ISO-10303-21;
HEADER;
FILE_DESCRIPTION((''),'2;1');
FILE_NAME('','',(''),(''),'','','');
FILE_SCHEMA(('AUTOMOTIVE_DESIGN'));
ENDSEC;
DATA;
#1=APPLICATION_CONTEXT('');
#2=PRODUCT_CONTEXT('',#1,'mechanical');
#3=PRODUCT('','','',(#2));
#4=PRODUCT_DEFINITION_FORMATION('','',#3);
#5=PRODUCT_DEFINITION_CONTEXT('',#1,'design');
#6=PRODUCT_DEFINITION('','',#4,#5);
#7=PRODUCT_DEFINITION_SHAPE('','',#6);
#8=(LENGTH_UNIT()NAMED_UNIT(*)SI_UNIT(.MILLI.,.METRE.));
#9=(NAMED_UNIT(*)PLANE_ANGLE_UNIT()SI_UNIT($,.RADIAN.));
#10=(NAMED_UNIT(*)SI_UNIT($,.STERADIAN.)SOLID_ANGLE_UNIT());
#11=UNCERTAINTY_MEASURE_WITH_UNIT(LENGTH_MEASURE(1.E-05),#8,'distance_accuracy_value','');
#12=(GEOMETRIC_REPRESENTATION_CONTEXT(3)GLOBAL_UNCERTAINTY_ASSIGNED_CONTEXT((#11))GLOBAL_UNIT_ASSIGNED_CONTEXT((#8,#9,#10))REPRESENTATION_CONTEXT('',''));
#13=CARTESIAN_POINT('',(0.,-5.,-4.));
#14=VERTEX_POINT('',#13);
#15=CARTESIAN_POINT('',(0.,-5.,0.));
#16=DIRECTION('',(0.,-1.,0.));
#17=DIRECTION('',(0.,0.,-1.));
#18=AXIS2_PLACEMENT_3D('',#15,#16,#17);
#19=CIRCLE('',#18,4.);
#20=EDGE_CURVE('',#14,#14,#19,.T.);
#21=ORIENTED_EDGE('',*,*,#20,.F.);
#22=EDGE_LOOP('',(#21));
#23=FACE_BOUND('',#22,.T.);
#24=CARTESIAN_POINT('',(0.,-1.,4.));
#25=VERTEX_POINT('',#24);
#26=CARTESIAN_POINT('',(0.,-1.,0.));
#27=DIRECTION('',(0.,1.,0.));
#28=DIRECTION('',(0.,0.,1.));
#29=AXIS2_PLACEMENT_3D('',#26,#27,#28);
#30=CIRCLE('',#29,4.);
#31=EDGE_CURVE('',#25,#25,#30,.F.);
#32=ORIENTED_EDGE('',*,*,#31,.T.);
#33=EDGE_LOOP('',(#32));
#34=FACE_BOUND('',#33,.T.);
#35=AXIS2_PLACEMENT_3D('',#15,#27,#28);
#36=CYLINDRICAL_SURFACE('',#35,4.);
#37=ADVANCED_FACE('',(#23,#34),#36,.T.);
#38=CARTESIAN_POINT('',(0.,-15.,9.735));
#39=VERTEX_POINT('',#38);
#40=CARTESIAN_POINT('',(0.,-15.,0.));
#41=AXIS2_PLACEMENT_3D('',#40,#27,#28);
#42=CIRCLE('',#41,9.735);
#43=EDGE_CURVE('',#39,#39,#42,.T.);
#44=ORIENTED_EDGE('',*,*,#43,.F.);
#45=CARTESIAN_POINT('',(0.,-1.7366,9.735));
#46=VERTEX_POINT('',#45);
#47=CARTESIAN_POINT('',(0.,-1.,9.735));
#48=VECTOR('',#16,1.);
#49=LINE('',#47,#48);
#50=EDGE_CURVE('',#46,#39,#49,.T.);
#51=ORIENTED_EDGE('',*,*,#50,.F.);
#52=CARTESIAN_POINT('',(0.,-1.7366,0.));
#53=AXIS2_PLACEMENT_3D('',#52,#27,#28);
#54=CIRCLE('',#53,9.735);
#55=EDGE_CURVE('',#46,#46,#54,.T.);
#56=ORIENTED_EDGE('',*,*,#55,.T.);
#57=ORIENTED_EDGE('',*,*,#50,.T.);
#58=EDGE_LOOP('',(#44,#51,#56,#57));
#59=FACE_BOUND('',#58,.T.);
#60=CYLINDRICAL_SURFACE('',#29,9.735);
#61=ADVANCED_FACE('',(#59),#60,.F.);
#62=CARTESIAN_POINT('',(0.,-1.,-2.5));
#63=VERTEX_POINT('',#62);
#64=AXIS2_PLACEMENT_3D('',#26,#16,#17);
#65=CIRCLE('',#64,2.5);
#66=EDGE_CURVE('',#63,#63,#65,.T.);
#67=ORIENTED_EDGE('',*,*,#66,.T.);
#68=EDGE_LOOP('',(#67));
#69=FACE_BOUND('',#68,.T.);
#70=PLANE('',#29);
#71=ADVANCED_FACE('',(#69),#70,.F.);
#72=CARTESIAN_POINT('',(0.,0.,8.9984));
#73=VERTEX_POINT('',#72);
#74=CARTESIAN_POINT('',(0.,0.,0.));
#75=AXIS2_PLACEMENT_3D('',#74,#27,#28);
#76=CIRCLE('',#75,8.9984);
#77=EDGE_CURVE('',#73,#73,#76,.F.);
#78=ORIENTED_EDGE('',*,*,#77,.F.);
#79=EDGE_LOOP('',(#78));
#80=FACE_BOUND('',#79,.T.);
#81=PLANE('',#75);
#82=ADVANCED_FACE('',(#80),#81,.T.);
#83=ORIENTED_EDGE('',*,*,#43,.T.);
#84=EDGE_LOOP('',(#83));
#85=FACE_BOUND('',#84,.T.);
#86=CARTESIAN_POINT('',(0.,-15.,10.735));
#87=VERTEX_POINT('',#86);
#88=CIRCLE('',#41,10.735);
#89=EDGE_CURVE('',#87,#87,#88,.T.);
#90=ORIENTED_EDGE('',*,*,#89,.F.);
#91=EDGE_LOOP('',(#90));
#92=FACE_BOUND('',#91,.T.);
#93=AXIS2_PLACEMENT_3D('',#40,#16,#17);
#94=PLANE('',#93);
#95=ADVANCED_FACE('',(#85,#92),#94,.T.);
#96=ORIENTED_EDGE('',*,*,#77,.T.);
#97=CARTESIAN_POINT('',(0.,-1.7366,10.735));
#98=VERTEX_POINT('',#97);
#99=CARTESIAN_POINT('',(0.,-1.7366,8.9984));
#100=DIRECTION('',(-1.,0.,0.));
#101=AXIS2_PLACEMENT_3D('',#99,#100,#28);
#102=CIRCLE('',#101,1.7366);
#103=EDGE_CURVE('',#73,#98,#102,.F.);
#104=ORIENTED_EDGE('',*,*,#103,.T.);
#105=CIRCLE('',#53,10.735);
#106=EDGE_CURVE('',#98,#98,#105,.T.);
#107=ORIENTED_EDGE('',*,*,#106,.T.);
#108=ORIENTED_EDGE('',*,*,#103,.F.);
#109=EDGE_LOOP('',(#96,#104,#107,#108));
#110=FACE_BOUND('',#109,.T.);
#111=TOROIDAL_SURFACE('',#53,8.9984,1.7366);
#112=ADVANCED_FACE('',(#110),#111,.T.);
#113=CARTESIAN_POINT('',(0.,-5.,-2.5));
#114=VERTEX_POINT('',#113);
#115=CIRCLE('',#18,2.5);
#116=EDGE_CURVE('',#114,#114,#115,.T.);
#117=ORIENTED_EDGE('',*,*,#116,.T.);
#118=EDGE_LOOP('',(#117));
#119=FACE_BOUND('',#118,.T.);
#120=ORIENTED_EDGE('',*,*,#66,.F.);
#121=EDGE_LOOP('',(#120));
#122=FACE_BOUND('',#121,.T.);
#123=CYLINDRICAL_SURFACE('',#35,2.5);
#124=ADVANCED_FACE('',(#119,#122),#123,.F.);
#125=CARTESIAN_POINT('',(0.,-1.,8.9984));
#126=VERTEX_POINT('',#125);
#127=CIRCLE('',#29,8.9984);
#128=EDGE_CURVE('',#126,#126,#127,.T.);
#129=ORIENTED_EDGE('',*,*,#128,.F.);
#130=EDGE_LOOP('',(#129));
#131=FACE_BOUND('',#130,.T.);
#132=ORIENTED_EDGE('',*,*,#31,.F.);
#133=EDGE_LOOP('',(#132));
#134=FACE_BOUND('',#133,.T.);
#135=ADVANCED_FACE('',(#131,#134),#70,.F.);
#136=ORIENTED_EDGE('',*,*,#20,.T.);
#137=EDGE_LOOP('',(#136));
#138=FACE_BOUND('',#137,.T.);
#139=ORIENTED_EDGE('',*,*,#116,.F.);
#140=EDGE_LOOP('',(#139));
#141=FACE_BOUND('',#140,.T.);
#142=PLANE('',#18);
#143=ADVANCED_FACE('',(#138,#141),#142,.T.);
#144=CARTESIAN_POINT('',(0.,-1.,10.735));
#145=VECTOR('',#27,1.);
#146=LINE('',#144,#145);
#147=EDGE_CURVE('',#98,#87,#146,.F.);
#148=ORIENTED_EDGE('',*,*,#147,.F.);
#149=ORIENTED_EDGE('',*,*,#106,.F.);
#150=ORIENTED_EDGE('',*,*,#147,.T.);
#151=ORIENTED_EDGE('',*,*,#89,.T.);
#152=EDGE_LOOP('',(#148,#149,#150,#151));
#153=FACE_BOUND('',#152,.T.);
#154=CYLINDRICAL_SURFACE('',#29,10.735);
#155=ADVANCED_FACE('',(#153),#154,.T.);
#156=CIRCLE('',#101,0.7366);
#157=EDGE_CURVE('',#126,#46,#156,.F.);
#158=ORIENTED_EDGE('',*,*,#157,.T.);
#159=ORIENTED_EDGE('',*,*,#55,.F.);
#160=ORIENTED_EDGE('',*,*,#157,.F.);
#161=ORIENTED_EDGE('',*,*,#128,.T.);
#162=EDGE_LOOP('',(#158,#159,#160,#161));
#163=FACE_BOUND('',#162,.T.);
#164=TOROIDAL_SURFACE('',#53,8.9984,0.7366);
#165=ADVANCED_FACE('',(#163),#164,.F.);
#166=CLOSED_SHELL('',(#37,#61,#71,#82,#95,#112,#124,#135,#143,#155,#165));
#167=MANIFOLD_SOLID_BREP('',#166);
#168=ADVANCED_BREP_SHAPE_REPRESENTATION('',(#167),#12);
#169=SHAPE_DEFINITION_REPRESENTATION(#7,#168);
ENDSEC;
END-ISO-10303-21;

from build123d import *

# Parameters (mm, degrees)
SKETCH7_R           = 10.735
BASE_FLANGE1_DEPTH  = 1
SKETCH17_R          = 4
SKETCH17_R_2        = 2.5
BOSS_EXTRUDE1_DEPTH = 4


# Read off the part's stored shape, not the designer's step: Edge-Flange1
# Sheet-metal steps are written as plain solids
with BuildPart() as part:
    # Sketch7 → Base-Flange1 (new body)
    with BuildSketch(Plane(origin=(0, 0, 0), x_dir=(1, 0, 0), z_dir=(0, 1, 0))):
        with Locations(Location((0, 0, 0), (0, 0, 270))):
            Circle(SKETCH7_R)
    extrude(amount=-BASE_FLANGE1_DEPTH)

    # Edge-Flange1 outline → Edge-Flange1 (revolve, cut)
    with BuildSketch(Plane.XY):
        with BuildLine():
            Line((10.57104109, -1), (10.735, -1))
            Line((10.735, -1), (10.735, 0))
            Line((10.735, 0), (8.9984, 0))
            ThreePointArc((8.9984, 0), (9.930226164, -0.271171885), (10.57104109, -1))
        make_face()
    revolve(axis=Axis((0, 0, 0), (0, 1, 0)), mode=Mode.SUBTRACT)

    # Edge-Flange1 2 outline → Edge-Flange1 2 (revolve)
    with BuildSketch(Plane.XY):
        with BuildLine():
            Line((9.735, -1.7366), (9.735, -15))
            Line((9.735, -15), (10.735, -15))
            Line((10.735, -15), (10.735, -1.7366))
            ThreePointArc((10.735, -1.7366), (10.693514757, -1.359286442), (10.57104109, -1))
            Line((10.57104109, -1), (8.9984, -1))
            ThreePointArc((8.9984, -1), (9.519254855, -1.215745145), (9.735, -1.7366))
        make_face()
    revolve(axis=Axis((0, 0, 0), (0, 1, 0)))

    # Sketch17 → Boss-Extrude1 (add)
    with BuildSketch(Plane.XZ.offset(1)):
        with Locations(Location((0, 0, 0), (0, 0, 90))):
            Circle(SKETCH17_R)
        with Locations(Location((0, 0, 0), (0, 0, 270))):
            Circle(SKETCH17_R_2, mode=Mode.SUBTRACT)
    extrude(amount=BOSS_EXTRUDE1_DEPTH)


solid = part.part
